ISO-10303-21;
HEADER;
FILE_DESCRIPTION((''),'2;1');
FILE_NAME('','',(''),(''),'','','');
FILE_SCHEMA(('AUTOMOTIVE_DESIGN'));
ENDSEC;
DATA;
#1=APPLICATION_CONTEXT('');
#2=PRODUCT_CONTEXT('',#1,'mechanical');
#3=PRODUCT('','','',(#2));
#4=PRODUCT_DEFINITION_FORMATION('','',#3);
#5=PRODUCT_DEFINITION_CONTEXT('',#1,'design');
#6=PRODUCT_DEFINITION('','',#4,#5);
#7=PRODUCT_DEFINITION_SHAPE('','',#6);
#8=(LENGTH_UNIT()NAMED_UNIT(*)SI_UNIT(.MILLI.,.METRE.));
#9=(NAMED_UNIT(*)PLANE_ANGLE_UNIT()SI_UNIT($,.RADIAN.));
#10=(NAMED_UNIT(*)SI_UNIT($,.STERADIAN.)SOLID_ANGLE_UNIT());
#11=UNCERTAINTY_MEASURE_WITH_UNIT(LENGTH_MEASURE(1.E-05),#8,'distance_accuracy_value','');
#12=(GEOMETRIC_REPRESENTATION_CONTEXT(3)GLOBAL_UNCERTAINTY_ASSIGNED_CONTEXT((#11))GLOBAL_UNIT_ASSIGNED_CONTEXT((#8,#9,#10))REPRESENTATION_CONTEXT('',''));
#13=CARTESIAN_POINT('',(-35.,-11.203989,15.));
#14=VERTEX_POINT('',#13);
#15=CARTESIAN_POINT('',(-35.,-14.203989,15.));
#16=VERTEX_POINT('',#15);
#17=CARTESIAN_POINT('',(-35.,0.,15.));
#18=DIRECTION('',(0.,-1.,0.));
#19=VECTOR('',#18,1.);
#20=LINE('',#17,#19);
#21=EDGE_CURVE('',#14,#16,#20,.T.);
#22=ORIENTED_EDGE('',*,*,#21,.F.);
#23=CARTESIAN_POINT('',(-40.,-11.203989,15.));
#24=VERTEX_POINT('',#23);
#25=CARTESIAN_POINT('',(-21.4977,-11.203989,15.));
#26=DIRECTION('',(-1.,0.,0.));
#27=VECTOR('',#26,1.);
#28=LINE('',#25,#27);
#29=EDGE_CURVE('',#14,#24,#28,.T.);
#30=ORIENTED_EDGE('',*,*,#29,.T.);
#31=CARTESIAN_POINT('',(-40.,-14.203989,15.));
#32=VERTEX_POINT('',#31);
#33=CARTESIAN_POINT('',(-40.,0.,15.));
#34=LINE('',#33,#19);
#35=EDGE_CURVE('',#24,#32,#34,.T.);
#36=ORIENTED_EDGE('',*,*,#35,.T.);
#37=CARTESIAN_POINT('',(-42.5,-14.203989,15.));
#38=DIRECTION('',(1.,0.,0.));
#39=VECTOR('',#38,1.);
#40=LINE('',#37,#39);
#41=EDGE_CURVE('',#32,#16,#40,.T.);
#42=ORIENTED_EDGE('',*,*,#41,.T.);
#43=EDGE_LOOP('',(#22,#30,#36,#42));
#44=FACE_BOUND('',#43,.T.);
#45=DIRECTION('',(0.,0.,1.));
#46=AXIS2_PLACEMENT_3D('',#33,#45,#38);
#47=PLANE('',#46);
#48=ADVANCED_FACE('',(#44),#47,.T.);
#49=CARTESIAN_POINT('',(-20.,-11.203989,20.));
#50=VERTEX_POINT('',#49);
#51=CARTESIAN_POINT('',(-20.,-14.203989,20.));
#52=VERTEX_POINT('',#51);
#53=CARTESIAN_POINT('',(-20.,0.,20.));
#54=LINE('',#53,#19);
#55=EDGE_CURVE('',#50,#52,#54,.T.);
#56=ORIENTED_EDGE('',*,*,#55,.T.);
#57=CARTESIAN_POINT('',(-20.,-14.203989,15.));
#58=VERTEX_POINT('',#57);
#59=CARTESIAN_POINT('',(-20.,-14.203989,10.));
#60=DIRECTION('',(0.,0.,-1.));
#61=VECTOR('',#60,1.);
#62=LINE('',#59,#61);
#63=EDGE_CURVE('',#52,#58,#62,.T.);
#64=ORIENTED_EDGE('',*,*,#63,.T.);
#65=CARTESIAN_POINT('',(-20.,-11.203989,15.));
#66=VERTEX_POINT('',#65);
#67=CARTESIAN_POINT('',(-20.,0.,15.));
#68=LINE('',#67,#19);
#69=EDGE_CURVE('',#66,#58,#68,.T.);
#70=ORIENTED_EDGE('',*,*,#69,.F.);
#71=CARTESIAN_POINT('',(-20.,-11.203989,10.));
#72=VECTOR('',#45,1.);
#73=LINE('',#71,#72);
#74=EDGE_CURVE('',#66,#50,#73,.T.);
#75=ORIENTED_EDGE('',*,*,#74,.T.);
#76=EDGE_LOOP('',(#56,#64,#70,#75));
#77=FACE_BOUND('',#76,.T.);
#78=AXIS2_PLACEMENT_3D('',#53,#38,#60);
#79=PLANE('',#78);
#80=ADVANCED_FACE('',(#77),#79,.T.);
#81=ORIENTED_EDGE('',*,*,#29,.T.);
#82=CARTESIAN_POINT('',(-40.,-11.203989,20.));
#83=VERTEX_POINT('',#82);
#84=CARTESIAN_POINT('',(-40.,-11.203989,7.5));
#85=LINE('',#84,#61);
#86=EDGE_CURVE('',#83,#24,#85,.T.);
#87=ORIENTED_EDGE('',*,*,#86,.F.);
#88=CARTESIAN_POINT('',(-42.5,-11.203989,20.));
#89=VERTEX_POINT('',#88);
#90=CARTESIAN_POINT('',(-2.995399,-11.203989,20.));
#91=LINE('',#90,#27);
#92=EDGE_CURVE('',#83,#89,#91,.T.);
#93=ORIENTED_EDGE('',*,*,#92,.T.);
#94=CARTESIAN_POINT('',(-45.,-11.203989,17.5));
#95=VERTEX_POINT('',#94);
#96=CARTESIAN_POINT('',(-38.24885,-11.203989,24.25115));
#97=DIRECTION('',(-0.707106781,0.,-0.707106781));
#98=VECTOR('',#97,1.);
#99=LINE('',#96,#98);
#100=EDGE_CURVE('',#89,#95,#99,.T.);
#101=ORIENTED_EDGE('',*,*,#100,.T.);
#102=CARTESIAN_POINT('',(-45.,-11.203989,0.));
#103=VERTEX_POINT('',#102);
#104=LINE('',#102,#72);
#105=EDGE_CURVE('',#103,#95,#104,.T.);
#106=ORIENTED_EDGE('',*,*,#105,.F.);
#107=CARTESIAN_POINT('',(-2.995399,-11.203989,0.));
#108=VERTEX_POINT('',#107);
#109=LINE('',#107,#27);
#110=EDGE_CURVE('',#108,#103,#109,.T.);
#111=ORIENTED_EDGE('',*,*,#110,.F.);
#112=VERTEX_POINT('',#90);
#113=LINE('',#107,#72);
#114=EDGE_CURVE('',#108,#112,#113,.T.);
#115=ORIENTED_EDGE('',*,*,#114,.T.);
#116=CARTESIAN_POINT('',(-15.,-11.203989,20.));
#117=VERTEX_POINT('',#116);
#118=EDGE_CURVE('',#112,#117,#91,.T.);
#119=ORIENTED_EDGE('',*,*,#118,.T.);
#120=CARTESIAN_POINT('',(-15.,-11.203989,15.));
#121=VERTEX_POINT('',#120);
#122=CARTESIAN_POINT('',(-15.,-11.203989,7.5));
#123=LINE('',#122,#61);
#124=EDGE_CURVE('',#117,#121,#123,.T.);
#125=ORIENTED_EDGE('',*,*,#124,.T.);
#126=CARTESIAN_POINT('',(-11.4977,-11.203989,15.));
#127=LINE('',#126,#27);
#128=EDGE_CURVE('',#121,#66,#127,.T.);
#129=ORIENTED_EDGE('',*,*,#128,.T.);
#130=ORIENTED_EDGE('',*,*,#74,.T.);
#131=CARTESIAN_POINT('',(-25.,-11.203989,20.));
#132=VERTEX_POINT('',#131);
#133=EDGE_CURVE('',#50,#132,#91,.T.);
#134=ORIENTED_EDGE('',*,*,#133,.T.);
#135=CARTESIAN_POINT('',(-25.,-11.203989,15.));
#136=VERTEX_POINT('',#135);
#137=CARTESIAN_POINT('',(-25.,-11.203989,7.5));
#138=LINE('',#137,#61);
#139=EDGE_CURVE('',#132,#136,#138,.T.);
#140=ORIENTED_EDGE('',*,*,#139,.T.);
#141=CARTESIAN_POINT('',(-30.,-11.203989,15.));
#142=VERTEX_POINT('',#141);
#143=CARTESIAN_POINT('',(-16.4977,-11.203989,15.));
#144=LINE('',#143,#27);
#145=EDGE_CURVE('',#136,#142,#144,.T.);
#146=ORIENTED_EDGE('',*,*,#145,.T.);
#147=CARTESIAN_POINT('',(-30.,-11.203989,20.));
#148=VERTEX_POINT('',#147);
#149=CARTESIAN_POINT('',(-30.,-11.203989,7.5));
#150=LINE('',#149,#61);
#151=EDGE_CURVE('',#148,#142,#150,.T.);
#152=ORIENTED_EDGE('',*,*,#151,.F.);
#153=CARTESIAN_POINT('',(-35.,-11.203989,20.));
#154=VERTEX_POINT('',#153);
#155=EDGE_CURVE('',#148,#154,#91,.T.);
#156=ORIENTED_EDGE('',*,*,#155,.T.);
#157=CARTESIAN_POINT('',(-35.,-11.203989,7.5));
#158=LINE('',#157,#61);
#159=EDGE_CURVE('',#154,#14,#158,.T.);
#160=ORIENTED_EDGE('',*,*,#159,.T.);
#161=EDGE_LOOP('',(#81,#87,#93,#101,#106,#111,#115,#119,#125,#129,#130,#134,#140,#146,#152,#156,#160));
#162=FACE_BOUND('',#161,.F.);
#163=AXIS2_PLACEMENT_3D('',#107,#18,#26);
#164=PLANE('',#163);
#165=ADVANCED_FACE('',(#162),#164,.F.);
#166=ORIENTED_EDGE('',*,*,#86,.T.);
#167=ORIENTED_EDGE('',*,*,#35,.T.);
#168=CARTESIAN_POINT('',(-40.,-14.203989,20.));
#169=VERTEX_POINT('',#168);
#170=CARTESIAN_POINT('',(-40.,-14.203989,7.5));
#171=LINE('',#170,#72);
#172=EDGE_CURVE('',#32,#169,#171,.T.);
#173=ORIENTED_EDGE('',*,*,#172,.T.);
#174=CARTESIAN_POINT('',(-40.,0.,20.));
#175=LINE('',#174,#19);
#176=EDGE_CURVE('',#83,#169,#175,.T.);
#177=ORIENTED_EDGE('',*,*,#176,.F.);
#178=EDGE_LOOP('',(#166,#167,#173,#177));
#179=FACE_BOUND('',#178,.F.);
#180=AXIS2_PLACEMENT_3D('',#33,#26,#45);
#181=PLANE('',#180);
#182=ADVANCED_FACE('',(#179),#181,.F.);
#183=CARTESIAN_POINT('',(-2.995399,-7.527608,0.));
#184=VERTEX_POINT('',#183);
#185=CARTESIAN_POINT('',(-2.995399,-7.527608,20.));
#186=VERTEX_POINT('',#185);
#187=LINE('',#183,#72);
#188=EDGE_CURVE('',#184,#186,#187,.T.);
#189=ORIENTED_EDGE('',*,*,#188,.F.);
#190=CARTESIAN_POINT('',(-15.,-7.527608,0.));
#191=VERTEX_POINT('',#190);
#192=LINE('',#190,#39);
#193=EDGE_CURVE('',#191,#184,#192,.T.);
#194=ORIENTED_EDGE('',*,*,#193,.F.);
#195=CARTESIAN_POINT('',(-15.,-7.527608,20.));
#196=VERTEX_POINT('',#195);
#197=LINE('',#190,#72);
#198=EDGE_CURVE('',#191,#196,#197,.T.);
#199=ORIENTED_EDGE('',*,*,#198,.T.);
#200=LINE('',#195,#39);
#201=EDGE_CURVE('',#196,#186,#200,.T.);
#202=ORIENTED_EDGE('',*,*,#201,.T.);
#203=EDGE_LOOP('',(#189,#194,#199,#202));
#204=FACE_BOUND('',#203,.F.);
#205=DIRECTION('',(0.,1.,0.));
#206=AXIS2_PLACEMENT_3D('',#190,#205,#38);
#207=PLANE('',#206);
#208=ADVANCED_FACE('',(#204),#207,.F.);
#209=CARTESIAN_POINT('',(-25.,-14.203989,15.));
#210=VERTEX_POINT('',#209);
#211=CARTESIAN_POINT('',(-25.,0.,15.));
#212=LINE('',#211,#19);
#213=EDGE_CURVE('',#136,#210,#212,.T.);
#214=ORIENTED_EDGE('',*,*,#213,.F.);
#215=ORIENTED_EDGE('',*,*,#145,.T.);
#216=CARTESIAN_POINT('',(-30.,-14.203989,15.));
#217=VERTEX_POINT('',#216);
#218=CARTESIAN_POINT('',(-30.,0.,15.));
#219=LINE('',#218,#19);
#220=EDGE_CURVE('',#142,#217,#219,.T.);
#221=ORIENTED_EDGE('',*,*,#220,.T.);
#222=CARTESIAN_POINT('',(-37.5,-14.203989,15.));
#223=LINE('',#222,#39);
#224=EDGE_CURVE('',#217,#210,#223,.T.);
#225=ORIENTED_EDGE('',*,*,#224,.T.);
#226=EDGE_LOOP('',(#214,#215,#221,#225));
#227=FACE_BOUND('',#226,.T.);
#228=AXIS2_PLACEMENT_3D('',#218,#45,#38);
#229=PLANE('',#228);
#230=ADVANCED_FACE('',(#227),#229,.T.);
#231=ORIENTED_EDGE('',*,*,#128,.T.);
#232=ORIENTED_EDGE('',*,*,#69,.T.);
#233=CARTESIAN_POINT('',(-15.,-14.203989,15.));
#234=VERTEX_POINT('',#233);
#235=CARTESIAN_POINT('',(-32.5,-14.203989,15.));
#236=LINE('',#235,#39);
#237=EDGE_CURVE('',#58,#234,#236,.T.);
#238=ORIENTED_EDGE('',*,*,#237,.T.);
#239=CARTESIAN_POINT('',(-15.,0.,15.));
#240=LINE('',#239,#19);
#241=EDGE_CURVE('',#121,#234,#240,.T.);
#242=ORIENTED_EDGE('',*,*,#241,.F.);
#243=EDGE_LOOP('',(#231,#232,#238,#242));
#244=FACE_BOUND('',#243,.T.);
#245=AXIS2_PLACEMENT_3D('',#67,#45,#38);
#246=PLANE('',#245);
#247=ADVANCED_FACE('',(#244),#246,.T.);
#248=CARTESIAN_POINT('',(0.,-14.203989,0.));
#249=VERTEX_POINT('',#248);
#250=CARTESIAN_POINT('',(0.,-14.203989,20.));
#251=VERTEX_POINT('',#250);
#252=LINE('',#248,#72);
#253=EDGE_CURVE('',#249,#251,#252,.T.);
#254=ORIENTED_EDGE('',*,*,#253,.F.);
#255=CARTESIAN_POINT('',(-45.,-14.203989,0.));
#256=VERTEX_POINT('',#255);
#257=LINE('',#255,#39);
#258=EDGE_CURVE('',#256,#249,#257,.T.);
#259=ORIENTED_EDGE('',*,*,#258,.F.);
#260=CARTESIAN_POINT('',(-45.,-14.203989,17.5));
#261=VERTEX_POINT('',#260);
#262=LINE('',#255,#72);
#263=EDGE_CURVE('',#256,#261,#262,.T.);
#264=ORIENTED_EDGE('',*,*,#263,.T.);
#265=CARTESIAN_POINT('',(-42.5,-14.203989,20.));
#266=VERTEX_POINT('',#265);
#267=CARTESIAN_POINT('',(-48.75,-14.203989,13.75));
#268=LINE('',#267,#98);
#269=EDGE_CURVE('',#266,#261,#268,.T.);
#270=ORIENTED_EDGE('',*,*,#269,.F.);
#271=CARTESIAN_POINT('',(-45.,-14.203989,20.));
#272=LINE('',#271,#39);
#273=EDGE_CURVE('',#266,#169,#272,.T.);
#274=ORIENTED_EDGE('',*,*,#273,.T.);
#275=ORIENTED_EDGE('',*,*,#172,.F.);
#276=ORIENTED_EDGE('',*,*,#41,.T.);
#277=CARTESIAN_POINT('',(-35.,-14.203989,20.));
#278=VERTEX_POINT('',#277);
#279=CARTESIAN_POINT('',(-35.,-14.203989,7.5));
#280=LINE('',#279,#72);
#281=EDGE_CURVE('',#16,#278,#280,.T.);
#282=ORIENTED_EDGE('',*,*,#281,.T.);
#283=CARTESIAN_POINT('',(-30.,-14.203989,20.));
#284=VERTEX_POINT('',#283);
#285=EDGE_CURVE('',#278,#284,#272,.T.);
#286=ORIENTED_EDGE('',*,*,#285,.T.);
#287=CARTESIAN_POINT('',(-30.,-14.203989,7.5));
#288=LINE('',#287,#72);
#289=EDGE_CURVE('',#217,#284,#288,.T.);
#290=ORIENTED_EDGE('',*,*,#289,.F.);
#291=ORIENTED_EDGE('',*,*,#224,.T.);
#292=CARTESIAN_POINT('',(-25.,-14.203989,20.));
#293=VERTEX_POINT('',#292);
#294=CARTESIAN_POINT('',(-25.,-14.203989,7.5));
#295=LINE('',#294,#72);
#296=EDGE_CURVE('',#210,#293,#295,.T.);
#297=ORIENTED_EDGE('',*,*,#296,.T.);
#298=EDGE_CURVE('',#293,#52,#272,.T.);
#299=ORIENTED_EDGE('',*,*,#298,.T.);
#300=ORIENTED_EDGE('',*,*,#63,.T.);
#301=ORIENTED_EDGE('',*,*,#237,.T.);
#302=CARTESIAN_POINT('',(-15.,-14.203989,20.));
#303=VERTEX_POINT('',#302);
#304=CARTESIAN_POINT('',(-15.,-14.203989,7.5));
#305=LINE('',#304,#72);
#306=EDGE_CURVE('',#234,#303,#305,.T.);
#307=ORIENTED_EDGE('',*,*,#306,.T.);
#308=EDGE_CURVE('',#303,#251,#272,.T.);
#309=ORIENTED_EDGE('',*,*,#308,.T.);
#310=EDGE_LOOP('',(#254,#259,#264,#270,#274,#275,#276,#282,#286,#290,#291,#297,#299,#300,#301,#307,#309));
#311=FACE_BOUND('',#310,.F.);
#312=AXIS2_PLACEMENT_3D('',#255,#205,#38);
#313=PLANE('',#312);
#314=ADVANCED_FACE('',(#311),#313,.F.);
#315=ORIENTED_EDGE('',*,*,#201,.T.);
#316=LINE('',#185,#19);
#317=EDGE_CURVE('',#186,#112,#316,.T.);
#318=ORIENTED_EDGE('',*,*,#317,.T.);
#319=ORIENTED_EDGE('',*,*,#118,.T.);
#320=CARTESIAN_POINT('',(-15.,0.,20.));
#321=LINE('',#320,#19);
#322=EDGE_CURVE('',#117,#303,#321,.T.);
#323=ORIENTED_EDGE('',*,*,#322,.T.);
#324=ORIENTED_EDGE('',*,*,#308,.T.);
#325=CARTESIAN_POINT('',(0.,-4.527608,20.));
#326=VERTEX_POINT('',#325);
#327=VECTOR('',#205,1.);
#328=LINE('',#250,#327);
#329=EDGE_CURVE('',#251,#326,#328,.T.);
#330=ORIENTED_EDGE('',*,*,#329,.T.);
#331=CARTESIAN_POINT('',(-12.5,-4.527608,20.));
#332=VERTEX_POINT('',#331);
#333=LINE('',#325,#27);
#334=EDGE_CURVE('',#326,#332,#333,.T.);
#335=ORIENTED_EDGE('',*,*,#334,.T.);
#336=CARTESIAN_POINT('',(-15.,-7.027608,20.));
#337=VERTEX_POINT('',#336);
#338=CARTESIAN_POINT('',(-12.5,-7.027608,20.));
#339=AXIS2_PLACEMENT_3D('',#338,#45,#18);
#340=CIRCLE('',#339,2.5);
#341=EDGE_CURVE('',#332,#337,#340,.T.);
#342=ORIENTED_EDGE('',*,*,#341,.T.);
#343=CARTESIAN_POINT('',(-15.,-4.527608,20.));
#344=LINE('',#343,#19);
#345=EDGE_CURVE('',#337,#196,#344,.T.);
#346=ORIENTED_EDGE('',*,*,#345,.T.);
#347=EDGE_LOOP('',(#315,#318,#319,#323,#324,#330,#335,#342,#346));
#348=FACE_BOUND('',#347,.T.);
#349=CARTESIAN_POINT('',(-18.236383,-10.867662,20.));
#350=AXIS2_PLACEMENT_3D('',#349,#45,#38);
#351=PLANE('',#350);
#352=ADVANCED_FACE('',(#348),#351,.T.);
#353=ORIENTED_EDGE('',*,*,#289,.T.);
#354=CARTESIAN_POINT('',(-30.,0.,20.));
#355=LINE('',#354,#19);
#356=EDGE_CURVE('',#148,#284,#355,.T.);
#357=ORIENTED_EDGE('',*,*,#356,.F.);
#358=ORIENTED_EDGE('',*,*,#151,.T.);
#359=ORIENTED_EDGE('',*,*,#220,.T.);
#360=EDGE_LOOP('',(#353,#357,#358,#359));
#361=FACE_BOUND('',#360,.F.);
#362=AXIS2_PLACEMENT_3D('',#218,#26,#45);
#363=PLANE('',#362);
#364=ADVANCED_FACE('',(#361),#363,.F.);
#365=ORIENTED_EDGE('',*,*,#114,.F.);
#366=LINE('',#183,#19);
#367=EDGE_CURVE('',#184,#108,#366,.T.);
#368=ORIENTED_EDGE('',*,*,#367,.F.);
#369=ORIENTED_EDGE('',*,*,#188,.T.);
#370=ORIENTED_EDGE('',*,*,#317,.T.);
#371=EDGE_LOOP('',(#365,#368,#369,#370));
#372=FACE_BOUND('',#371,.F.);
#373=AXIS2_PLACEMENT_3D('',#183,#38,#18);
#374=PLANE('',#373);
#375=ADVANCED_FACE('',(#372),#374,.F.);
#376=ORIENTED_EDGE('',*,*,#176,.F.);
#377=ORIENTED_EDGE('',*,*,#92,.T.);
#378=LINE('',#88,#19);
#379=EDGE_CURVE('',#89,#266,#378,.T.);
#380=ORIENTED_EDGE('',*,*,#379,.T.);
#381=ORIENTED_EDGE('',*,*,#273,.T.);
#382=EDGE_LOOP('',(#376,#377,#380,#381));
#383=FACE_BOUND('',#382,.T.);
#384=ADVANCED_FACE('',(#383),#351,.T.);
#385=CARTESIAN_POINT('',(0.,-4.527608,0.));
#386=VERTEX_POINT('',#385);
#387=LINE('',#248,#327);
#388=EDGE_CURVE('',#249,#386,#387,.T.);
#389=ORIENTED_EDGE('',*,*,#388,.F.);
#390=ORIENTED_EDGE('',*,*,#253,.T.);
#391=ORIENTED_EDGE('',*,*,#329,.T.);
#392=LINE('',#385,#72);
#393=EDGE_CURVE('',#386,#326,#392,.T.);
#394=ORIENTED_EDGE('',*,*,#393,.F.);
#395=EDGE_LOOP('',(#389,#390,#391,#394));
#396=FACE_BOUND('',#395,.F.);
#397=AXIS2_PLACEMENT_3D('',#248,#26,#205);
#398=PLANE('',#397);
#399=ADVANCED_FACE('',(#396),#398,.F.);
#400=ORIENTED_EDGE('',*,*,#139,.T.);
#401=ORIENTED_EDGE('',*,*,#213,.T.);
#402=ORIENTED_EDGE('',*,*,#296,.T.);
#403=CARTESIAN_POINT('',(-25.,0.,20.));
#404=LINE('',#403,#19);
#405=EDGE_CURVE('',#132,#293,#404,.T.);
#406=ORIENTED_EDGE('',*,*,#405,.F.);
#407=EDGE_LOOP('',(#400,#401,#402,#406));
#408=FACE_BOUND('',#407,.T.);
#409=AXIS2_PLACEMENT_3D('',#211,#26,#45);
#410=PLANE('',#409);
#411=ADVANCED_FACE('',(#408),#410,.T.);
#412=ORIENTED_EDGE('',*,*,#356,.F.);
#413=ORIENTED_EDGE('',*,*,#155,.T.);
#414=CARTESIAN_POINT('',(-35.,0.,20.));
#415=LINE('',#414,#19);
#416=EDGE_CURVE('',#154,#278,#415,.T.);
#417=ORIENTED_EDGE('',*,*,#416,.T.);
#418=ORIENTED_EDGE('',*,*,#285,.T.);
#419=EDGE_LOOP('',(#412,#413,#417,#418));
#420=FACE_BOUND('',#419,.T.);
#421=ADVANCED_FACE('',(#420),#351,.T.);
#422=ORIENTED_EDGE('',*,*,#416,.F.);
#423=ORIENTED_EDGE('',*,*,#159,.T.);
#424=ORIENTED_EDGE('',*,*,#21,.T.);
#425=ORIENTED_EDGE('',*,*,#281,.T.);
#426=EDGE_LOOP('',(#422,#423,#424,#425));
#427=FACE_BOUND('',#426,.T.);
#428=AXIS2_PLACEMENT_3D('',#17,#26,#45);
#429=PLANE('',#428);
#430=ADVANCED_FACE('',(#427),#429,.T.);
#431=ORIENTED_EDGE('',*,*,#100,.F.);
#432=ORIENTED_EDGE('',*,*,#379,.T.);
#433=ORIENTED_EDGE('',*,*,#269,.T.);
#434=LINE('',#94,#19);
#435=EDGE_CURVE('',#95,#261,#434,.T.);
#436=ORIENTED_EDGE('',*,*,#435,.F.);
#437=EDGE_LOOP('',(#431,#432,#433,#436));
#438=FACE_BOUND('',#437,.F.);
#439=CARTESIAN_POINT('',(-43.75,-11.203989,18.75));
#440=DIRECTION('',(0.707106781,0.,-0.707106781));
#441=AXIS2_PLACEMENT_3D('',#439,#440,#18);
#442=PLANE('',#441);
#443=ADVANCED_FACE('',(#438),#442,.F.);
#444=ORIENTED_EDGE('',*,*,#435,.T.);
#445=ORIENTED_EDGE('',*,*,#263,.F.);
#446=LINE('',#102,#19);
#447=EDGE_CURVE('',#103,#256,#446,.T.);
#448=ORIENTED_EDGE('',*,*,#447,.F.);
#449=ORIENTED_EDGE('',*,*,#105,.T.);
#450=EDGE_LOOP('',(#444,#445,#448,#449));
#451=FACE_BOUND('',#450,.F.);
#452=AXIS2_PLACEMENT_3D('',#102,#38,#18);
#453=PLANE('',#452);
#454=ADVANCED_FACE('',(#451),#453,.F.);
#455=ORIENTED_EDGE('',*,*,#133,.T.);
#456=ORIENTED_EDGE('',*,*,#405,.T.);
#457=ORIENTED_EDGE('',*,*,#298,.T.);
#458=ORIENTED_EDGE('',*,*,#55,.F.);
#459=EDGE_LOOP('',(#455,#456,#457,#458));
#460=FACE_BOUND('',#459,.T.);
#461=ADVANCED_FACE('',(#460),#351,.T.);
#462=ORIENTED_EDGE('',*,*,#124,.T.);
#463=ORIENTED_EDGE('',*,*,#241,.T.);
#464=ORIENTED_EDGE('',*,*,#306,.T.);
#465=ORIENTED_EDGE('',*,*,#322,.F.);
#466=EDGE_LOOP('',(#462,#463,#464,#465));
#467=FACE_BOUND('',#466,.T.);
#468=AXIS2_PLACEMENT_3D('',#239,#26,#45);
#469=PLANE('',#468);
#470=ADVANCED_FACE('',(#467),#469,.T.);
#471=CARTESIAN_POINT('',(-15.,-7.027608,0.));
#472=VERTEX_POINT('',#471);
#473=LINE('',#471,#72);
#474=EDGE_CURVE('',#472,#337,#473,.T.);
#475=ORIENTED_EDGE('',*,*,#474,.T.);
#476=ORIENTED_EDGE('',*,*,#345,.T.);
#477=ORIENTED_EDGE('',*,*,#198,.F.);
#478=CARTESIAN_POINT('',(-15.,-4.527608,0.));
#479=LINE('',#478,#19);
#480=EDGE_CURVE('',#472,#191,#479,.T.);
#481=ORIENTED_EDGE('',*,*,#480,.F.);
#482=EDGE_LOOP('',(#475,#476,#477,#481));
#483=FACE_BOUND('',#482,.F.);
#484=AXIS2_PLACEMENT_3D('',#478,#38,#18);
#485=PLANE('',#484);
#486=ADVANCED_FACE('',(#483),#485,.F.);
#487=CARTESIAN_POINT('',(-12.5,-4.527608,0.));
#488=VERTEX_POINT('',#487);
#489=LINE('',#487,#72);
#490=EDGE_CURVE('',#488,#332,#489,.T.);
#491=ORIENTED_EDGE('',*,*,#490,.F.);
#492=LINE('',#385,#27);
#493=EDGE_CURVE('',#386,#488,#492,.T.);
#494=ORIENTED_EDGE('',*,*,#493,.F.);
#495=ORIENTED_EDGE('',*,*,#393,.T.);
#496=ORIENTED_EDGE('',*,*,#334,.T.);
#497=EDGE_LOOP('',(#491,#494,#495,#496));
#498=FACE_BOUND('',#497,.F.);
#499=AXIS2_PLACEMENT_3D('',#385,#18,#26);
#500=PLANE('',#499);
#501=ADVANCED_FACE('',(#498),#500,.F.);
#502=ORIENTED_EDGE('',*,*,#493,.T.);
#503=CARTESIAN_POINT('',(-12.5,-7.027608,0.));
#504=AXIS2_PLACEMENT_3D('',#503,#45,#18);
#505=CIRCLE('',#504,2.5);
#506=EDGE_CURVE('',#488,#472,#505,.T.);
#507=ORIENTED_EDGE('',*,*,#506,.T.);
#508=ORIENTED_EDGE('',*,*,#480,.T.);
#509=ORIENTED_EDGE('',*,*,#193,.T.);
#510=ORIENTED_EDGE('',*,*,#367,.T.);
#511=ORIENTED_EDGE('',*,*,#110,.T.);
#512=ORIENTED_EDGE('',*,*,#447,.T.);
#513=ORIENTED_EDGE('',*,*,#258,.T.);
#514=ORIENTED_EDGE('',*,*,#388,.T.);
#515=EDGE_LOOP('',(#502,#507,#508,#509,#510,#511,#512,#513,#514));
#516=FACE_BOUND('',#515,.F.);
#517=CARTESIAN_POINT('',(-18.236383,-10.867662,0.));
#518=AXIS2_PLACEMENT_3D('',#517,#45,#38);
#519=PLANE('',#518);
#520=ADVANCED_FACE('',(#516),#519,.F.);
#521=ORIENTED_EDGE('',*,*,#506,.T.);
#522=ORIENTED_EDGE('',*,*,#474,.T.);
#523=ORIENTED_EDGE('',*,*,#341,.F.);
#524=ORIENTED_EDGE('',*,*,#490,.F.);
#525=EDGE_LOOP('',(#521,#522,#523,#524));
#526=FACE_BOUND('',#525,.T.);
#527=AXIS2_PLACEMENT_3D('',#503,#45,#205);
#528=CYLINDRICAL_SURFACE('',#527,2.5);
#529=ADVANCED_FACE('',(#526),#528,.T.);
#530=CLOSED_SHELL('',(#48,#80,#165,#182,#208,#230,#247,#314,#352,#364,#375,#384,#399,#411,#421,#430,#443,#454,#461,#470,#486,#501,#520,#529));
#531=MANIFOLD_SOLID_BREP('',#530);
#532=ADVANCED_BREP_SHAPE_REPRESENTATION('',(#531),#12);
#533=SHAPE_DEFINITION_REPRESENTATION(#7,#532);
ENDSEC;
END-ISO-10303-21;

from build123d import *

# Parameters (mm, degrees)
F1_DEPTH = 20
F2_W     = 5
F2_H     = 5
F3_DEPTH = 14.204988947
F4_SIZE  = 2.5
F5_R     = 2.5


# Not quite as in the source:
# - a feature names something its author has since deleted; it is built from what else it names


with BuildPart() as f1:
    # F0 (on Top) → F1 (new body)
    with BuildSketch(Plane.XY):
        Polygon((0, -14.203988947), (0, -4.5276075453), (-15, -4.5276075453), (-15, -7.5276075453), (-2.9953992926, -7.5276075453), (-2.9953992926, -11.203988947), (-45, -11.203988947), (-45, -14.203988947), align=None)
    extrude(amount=F1_DEPTH)

    # F2 (on Front) → F3 (cut, through all)
    with BuildSketch(Plane.XZ):
        Polygon((-15, 17.4460405111), (-15, 20), (-20, 20), (-20, 15), (-15, 15), align=None)
        with Locations((-27.5, 17.5)):
            Rectangle(F2_W, F2_H)
        with Locations((-37.5, 17.5)):
            Rectangle(F2_W, F2_H)
    extrude(amount=F3_DEPTH, mode=Mode.SUBTRACT)

    # F4
    f4_edges = [f1.edges().sort_by_distance(p)[0] for p in [
        (-45, -12.703989, 20),
    ]]
    chamfer(f4_edges, length=F4_SIZE)

    # F5
    f5_edges = [f1.edges().sort_by_distance(p)[0] for p in [
        (-15, -4.527608, 10),
    ]]
    fillet(f5_edges, radius=F5_R)


solid = f1.part
